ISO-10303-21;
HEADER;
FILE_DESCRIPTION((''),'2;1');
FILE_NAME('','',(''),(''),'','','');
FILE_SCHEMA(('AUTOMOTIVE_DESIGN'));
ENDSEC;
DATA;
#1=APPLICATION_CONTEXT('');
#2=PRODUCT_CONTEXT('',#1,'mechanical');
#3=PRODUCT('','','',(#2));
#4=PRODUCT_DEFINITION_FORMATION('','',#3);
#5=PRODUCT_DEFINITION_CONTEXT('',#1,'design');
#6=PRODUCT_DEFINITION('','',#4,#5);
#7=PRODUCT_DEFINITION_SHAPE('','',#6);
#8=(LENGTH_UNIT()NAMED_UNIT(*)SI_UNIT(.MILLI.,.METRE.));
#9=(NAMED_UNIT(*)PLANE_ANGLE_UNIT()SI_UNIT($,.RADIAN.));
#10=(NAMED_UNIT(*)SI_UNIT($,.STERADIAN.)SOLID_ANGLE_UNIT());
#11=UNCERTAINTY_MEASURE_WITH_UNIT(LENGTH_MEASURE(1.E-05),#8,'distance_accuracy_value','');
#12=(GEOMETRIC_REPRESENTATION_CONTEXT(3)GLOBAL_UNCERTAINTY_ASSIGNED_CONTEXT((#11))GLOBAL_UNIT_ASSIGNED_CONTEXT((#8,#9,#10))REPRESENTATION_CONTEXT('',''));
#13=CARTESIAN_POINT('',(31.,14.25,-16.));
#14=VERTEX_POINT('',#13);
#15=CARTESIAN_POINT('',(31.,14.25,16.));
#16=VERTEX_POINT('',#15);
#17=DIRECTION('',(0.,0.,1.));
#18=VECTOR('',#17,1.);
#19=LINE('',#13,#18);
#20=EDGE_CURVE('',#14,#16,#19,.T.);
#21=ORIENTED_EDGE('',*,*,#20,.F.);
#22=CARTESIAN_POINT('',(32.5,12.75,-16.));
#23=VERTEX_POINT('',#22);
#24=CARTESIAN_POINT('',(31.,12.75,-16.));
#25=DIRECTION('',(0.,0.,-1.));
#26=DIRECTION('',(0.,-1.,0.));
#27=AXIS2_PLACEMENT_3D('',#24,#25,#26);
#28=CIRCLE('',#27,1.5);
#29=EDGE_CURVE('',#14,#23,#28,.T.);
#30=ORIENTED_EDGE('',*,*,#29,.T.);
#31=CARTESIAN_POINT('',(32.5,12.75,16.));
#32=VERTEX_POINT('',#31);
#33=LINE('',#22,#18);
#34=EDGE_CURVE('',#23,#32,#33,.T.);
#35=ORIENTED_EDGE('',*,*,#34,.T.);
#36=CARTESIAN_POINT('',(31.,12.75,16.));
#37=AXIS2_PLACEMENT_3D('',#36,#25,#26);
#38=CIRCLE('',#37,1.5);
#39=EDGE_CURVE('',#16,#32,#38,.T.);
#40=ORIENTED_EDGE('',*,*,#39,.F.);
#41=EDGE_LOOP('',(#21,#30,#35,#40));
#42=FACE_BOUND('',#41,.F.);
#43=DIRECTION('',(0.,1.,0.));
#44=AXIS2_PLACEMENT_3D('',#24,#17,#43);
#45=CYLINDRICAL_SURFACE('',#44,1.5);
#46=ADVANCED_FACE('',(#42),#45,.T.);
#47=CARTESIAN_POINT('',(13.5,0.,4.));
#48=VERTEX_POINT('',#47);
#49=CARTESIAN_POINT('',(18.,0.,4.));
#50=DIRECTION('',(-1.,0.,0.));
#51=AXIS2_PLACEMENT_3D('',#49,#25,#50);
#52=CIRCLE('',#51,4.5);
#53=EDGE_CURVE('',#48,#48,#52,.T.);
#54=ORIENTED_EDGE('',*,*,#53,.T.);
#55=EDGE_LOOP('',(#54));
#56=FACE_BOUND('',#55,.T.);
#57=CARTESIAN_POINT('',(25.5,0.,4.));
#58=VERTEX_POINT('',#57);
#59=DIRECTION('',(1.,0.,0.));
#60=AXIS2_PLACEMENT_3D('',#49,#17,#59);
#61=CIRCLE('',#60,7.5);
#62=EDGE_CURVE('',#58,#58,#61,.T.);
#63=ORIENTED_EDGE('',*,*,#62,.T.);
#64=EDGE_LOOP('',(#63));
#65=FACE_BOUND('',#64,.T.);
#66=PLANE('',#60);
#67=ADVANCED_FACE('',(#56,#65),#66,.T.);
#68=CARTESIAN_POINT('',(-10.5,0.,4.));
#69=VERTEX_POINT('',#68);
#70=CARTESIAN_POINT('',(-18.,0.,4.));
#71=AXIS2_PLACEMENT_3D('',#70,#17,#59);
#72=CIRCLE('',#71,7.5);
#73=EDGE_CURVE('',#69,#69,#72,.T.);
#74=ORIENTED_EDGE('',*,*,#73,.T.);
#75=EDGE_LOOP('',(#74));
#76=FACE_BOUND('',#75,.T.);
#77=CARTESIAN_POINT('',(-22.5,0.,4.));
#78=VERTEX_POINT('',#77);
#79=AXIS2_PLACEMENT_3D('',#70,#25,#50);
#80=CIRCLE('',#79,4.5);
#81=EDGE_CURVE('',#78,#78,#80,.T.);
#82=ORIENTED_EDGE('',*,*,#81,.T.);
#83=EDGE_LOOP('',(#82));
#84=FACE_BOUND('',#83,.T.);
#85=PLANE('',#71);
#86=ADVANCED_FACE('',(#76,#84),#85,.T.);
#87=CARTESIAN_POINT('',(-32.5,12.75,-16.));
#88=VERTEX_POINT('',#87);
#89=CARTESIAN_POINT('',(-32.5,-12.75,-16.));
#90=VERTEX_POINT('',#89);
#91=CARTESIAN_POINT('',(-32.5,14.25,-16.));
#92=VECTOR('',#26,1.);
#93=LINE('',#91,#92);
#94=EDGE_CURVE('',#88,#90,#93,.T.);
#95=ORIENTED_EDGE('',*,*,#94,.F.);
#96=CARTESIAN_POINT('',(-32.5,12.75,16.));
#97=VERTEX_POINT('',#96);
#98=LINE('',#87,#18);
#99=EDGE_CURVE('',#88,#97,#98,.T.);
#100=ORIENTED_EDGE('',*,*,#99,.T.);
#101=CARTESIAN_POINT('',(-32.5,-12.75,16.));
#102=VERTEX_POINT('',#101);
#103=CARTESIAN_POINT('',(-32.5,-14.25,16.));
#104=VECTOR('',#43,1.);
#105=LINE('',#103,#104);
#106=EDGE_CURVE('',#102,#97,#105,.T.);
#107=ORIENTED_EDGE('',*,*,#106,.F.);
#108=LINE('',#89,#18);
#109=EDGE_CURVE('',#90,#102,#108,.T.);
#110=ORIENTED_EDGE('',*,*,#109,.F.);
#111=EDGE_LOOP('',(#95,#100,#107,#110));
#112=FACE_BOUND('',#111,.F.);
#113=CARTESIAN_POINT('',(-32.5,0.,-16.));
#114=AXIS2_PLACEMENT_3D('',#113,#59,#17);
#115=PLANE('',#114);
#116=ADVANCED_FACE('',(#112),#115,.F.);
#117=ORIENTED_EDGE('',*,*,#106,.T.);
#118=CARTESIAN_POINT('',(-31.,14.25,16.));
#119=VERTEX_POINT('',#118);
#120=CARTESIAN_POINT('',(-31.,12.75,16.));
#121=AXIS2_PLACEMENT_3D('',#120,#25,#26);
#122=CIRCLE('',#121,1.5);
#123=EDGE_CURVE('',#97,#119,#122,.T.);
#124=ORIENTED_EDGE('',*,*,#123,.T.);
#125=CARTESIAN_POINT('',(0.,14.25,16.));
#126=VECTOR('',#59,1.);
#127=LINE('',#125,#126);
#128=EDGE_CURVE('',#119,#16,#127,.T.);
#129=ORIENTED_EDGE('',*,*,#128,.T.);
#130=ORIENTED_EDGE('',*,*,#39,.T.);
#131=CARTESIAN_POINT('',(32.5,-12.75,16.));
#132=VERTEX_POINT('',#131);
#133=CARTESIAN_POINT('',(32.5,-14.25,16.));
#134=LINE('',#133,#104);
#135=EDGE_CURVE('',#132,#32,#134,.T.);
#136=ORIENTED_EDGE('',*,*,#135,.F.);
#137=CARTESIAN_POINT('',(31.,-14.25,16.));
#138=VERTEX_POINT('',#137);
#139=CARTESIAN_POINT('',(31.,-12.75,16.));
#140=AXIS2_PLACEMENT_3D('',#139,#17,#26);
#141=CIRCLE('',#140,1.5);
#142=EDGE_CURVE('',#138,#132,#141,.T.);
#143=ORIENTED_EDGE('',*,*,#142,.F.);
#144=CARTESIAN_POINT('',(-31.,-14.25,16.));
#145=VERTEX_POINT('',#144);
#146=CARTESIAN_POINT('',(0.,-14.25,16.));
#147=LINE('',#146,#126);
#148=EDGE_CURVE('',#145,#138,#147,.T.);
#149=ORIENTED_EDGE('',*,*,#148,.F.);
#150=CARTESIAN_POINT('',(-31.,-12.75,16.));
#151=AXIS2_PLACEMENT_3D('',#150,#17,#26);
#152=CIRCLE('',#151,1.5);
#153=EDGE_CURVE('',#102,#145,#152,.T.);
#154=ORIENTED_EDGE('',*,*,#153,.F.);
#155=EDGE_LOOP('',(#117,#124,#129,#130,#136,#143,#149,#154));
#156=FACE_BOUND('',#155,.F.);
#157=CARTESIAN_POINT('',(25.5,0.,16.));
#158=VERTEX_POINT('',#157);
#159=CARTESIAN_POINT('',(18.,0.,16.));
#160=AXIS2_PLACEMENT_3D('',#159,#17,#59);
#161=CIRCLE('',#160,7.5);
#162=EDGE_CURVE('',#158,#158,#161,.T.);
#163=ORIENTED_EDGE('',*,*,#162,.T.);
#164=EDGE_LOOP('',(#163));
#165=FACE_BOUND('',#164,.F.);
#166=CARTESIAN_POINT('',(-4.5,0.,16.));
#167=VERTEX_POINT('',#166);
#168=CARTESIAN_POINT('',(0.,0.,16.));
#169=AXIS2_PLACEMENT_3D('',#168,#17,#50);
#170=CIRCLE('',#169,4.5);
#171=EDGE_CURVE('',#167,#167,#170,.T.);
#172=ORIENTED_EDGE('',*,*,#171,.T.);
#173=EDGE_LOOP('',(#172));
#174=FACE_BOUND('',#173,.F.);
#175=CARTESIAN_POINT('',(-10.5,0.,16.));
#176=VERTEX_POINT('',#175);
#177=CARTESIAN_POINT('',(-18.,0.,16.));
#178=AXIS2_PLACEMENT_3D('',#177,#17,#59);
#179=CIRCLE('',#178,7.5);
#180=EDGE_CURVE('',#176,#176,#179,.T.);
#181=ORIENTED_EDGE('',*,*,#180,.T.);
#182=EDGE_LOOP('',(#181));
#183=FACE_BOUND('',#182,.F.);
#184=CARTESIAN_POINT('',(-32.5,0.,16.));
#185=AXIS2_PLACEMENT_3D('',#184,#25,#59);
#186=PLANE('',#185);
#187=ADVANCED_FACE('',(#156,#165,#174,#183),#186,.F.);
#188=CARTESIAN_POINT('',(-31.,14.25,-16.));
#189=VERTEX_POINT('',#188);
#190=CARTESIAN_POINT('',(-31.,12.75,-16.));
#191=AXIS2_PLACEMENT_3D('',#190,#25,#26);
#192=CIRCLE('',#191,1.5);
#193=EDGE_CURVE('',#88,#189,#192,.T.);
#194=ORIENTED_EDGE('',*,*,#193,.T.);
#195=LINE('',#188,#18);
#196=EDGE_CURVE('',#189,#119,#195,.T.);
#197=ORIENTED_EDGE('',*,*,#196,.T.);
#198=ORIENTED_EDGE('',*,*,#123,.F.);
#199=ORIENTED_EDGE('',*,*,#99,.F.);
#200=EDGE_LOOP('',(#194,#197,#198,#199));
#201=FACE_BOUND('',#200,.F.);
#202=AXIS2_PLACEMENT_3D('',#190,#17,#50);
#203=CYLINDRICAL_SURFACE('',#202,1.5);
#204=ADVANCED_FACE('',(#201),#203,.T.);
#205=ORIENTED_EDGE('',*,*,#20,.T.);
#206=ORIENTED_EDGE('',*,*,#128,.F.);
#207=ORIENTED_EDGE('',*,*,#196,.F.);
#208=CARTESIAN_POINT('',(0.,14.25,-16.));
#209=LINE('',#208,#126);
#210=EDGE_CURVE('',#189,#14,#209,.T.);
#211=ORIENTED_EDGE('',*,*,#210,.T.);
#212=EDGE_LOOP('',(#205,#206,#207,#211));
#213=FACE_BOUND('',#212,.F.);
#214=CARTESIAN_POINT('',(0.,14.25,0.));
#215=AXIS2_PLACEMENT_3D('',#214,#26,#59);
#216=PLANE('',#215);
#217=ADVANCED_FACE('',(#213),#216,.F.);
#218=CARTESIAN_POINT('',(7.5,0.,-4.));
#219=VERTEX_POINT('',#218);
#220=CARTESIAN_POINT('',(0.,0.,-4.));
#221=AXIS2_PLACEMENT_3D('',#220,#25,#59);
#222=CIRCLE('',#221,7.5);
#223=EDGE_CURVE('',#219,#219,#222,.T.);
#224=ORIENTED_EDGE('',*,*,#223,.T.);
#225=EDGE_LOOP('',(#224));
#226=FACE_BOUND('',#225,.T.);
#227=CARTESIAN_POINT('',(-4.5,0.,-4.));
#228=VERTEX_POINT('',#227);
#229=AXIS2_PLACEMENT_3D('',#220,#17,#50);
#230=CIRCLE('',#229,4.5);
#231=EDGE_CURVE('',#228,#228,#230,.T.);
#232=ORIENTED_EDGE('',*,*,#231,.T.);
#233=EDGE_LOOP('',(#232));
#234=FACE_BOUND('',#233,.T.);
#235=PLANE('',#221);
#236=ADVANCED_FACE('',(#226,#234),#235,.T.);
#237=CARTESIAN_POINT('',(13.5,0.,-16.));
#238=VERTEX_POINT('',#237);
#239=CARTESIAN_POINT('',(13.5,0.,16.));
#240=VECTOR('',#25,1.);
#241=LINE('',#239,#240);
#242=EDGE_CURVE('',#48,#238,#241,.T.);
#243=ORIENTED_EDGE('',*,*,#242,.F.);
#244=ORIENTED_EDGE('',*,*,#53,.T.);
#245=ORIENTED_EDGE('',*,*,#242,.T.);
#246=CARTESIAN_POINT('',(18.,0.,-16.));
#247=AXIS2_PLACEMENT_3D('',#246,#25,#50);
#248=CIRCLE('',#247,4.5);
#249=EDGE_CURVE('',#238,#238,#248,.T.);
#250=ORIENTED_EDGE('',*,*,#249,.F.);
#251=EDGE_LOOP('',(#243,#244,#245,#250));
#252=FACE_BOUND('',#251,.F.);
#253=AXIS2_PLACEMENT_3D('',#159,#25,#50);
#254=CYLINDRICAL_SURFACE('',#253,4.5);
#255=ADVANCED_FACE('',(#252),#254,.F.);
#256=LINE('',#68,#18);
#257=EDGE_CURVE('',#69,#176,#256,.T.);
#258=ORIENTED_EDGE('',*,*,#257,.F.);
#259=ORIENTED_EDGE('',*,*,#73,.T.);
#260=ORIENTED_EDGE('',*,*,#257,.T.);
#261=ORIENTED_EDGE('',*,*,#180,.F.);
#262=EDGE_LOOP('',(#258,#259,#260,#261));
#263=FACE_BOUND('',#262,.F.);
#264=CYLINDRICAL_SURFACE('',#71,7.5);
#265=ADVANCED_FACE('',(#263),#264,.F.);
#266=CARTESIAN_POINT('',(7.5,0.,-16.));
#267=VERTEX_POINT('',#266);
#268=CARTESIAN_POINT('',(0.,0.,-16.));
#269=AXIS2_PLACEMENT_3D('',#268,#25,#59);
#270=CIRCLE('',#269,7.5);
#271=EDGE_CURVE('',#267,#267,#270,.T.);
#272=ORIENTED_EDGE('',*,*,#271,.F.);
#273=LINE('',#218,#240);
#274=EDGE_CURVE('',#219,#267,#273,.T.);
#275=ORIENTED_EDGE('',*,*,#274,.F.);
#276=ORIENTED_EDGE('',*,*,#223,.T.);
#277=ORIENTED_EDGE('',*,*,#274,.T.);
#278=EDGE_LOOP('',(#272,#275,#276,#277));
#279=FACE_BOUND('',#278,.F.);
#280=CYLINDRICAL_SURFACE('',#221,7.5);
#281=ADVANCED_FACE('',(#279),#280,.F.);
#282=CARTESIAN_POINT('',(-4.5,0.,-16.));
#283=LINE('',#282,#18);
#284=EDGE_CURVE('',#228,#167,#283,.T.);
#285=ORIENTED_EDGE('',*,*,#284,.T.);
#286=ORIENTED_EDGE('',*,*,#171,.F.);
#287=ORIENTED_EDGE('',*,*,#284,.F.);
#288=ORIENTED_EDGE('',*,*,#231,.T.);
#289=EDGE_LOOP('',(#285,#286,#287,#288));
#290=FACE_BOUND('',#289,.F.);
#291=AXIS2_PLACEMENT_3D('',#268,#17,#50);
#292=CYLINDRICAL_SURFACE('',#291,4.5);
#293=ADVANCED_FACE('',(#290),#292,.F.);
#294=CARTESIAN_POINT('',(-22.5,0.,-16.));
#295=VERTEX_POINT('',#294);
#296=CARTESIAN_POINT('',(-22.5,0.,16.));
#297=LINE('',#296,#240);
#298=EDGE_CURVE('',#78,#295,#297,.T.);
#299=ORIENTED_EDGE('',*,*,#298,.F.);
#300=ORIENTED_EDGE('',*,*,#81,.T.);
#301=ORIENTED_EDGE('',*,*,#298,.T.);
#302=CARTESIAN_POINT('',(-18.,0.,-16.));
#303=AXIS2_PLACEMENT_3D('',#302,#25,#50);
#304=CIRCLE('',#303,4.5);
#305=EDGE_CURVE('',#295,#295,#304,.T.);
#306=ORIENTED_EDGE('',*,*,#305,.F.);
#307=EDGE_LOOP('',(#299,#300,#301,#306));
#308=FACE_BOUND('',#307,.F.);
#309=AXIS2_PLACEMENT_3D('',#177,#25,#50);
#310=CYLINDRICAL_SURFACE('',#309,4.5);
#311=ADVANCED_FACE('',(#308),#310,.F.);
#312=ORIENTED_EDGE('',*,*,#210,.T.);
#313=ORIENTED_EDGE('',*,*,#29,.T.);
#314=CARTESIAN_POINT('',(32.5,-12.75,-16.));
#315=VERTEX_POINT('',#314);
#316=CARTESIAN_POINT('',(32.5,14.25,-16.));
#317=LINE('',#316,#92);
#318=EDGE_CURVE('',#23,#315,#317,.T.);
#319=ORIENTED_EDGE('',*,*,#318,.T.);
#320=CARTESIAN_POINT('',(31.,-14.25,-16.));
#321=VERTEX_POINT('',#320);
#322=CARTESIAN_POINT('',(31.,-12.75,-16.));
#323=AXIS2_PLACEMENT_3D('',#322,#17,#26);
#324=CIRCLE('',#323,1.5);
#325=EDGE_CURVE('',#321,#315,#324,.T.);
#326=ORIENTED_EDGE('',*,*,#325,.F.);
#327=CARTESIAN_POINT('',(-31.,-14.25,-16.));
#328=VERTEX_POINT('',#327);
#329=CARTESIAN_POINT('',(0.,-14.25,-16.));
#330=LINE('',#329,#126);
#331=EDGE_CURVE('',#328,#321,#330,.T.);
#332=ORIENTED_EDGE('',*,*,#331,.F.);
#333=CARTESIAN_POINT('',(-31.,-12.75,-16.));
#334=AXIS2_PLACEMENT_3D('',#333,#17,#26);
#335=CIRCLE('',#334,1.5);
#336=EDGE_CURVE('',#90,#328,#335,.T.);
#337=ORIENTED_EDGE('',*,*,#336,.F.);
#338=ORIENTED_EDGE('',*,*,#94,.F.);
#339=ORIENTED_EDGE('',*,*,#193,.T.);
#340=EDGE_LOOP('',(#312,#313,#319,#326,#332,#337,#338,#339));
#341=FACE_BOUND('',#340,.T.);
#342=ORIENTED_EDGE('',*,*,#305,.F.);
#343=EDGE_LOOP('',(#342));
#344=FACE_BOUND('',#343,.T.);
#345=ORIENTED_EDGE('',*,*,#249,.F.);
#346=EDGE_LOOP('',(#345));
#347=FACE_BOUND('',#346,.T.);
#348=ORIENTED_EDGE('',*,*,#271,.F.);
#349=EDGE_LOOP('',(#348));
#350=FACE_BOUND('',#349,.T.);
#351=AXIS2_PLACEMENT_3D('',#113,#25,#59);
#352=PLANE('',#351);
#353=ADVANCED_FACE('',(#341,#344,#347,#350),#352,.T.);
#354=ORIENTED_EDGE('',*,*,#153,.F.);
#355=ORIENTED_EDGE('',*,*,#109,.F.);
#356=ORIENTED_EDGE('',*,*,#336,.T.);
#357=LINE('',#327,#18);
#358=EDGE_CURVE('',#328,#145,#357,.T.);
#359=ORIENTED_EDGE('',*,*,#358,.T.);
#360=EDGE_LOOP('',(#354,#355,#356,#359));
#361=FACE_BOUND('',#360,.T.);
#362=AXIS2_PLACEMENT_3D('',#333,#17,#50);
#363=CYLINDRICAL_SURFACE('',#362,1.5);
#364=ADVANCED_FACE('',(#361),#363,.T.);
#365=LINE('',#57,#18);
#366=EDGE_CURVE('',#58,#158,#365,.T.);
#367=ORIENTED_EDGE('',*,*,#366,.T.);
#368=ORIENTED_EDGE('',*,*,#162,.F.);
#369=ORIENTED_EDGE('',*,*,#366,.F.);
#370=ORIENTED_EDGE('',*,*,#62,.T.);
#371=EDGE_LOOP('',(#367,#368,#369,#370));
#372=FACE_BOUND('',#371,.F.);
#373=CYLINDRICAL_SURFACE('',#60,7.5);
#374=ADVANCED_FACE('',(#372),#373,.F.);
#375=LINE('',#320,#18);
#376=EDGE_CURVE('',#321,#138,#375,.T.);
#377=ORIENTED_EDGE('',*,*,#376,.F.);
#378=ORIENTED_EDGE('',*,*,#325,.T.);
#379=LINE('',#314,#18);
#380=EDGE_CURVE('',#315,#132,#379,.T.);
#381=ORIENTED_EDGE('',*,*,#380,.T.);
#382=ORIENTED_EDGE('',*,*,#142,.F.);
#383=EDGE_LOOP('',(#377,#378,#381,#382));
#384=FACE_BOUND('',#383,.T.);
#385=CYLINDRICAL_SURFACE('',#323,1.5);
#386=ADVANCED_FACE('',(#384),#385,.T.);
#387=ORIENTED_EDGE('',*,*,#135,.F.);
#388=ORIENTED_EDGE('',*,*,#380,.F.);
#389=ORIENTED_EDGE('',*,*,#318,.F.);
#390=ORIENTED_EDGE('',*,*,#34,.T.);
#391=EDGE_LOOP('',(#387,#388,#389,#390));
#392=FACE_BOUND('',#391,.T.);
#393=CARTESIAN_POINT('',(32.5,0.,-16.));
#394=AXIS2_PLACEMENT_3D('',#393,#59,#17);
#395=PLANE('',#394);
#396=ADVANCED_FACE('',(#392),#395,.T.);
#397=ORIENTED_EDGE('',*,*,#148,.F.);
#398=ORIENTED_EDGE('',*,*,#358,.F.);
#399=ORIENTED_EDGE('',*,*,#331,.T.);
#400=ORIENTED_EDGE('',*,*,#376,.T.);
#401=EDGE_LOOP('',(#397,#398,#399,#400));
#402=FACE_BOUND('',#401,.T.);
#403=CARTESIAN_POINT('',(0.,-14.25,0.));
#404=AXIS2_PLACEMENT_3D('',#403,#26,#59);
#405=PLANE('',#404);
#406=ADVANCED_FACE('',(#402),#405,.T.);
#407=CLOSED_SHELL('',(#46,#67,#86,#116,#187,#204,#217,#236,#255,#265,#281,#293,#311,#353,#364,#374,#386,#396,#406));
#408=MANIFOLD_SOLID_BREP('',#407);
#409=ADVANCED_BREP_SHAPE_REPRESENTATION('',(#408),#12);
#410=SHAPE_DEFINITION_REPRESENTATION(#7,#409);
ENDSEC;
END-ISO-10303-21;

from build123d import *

# Parameters (mm, degrees)
F0_W                 = 65
F0_H                 = 32
F1_DEPTH             = 14.25
F4_D                 = 9
F4_DEPTH             = 40
F4_CBORE_D           = 15
F4_CBORE_DEPTH       = 12
F4_TIP               = 2.7038727856
F4_ON_F3_D           = 9
F4_ON_F3_DEPTH       = 40
F4_ON_F3_CBORE_D     = 15
F4_ON_F3_CBORE_DEPTH = 12
F4_ON_F3_TIP         = 2.7038727856
F5_R                 = 1.5


with BuildPart() as f1:
    # F0 (on Front) → F1 (new body, symmetric)
    with BuildSketch(Plane.XZ):
        Rectangle(F0_W, F0_H)
    extrude(amount=F1_DEPTH, both=True)

    # F4
    with Locations(Plane.XY.offset(16)):
        with Locations((-18, 0), (18, 0)):
            CounterBoreHole(F4_D / 2, F4_CBORE_D / 2, F4_CBORE_DEPTH, depth=F4_DEPTH)
            with Locations((0, 0, -(F4_DEPTH + F4_TIP / 2))):  # 118° drill point
                Cone(0, F4_D / 2, F4_TIP, mode=Mode.SUBTRACT)

    # F4 on F3
    with Locations(Plane(origin=(0, 0, -16), x_dir=(1, 0, 0), z_dir=(0, 0, -1))):
        with Locations((0, 0)):
            CounterBoreHole(F4_ON_F3_D / 2, F4_ON_F3_CBORE_D / 2, F4_ON_F3_CBORE_DEPTH, depth=F4_ON_F3_DEPTH)
            with Locations((0, 0, -(F4_ON_F3_DEPTH + F4_ON_F3_TIP / 2))):  # 118° drill point
                Cone(0, F4_ON_F3_D / 2, F4_ON_F3_TIP, mode=Mode.SUBTRACT)

    # F5
    f5_edges = [f1.edges().sort_by_distance(p)[0] for p in [
        (-32.5, -14.25, 0),
        (32.5, -14.25, 0),
        (32.5, 14.25, 0),
        (-32.5, 14.25, 0),
    ]]
    fillet(f5_edges, radius=F5_R)


solid = f1.part
